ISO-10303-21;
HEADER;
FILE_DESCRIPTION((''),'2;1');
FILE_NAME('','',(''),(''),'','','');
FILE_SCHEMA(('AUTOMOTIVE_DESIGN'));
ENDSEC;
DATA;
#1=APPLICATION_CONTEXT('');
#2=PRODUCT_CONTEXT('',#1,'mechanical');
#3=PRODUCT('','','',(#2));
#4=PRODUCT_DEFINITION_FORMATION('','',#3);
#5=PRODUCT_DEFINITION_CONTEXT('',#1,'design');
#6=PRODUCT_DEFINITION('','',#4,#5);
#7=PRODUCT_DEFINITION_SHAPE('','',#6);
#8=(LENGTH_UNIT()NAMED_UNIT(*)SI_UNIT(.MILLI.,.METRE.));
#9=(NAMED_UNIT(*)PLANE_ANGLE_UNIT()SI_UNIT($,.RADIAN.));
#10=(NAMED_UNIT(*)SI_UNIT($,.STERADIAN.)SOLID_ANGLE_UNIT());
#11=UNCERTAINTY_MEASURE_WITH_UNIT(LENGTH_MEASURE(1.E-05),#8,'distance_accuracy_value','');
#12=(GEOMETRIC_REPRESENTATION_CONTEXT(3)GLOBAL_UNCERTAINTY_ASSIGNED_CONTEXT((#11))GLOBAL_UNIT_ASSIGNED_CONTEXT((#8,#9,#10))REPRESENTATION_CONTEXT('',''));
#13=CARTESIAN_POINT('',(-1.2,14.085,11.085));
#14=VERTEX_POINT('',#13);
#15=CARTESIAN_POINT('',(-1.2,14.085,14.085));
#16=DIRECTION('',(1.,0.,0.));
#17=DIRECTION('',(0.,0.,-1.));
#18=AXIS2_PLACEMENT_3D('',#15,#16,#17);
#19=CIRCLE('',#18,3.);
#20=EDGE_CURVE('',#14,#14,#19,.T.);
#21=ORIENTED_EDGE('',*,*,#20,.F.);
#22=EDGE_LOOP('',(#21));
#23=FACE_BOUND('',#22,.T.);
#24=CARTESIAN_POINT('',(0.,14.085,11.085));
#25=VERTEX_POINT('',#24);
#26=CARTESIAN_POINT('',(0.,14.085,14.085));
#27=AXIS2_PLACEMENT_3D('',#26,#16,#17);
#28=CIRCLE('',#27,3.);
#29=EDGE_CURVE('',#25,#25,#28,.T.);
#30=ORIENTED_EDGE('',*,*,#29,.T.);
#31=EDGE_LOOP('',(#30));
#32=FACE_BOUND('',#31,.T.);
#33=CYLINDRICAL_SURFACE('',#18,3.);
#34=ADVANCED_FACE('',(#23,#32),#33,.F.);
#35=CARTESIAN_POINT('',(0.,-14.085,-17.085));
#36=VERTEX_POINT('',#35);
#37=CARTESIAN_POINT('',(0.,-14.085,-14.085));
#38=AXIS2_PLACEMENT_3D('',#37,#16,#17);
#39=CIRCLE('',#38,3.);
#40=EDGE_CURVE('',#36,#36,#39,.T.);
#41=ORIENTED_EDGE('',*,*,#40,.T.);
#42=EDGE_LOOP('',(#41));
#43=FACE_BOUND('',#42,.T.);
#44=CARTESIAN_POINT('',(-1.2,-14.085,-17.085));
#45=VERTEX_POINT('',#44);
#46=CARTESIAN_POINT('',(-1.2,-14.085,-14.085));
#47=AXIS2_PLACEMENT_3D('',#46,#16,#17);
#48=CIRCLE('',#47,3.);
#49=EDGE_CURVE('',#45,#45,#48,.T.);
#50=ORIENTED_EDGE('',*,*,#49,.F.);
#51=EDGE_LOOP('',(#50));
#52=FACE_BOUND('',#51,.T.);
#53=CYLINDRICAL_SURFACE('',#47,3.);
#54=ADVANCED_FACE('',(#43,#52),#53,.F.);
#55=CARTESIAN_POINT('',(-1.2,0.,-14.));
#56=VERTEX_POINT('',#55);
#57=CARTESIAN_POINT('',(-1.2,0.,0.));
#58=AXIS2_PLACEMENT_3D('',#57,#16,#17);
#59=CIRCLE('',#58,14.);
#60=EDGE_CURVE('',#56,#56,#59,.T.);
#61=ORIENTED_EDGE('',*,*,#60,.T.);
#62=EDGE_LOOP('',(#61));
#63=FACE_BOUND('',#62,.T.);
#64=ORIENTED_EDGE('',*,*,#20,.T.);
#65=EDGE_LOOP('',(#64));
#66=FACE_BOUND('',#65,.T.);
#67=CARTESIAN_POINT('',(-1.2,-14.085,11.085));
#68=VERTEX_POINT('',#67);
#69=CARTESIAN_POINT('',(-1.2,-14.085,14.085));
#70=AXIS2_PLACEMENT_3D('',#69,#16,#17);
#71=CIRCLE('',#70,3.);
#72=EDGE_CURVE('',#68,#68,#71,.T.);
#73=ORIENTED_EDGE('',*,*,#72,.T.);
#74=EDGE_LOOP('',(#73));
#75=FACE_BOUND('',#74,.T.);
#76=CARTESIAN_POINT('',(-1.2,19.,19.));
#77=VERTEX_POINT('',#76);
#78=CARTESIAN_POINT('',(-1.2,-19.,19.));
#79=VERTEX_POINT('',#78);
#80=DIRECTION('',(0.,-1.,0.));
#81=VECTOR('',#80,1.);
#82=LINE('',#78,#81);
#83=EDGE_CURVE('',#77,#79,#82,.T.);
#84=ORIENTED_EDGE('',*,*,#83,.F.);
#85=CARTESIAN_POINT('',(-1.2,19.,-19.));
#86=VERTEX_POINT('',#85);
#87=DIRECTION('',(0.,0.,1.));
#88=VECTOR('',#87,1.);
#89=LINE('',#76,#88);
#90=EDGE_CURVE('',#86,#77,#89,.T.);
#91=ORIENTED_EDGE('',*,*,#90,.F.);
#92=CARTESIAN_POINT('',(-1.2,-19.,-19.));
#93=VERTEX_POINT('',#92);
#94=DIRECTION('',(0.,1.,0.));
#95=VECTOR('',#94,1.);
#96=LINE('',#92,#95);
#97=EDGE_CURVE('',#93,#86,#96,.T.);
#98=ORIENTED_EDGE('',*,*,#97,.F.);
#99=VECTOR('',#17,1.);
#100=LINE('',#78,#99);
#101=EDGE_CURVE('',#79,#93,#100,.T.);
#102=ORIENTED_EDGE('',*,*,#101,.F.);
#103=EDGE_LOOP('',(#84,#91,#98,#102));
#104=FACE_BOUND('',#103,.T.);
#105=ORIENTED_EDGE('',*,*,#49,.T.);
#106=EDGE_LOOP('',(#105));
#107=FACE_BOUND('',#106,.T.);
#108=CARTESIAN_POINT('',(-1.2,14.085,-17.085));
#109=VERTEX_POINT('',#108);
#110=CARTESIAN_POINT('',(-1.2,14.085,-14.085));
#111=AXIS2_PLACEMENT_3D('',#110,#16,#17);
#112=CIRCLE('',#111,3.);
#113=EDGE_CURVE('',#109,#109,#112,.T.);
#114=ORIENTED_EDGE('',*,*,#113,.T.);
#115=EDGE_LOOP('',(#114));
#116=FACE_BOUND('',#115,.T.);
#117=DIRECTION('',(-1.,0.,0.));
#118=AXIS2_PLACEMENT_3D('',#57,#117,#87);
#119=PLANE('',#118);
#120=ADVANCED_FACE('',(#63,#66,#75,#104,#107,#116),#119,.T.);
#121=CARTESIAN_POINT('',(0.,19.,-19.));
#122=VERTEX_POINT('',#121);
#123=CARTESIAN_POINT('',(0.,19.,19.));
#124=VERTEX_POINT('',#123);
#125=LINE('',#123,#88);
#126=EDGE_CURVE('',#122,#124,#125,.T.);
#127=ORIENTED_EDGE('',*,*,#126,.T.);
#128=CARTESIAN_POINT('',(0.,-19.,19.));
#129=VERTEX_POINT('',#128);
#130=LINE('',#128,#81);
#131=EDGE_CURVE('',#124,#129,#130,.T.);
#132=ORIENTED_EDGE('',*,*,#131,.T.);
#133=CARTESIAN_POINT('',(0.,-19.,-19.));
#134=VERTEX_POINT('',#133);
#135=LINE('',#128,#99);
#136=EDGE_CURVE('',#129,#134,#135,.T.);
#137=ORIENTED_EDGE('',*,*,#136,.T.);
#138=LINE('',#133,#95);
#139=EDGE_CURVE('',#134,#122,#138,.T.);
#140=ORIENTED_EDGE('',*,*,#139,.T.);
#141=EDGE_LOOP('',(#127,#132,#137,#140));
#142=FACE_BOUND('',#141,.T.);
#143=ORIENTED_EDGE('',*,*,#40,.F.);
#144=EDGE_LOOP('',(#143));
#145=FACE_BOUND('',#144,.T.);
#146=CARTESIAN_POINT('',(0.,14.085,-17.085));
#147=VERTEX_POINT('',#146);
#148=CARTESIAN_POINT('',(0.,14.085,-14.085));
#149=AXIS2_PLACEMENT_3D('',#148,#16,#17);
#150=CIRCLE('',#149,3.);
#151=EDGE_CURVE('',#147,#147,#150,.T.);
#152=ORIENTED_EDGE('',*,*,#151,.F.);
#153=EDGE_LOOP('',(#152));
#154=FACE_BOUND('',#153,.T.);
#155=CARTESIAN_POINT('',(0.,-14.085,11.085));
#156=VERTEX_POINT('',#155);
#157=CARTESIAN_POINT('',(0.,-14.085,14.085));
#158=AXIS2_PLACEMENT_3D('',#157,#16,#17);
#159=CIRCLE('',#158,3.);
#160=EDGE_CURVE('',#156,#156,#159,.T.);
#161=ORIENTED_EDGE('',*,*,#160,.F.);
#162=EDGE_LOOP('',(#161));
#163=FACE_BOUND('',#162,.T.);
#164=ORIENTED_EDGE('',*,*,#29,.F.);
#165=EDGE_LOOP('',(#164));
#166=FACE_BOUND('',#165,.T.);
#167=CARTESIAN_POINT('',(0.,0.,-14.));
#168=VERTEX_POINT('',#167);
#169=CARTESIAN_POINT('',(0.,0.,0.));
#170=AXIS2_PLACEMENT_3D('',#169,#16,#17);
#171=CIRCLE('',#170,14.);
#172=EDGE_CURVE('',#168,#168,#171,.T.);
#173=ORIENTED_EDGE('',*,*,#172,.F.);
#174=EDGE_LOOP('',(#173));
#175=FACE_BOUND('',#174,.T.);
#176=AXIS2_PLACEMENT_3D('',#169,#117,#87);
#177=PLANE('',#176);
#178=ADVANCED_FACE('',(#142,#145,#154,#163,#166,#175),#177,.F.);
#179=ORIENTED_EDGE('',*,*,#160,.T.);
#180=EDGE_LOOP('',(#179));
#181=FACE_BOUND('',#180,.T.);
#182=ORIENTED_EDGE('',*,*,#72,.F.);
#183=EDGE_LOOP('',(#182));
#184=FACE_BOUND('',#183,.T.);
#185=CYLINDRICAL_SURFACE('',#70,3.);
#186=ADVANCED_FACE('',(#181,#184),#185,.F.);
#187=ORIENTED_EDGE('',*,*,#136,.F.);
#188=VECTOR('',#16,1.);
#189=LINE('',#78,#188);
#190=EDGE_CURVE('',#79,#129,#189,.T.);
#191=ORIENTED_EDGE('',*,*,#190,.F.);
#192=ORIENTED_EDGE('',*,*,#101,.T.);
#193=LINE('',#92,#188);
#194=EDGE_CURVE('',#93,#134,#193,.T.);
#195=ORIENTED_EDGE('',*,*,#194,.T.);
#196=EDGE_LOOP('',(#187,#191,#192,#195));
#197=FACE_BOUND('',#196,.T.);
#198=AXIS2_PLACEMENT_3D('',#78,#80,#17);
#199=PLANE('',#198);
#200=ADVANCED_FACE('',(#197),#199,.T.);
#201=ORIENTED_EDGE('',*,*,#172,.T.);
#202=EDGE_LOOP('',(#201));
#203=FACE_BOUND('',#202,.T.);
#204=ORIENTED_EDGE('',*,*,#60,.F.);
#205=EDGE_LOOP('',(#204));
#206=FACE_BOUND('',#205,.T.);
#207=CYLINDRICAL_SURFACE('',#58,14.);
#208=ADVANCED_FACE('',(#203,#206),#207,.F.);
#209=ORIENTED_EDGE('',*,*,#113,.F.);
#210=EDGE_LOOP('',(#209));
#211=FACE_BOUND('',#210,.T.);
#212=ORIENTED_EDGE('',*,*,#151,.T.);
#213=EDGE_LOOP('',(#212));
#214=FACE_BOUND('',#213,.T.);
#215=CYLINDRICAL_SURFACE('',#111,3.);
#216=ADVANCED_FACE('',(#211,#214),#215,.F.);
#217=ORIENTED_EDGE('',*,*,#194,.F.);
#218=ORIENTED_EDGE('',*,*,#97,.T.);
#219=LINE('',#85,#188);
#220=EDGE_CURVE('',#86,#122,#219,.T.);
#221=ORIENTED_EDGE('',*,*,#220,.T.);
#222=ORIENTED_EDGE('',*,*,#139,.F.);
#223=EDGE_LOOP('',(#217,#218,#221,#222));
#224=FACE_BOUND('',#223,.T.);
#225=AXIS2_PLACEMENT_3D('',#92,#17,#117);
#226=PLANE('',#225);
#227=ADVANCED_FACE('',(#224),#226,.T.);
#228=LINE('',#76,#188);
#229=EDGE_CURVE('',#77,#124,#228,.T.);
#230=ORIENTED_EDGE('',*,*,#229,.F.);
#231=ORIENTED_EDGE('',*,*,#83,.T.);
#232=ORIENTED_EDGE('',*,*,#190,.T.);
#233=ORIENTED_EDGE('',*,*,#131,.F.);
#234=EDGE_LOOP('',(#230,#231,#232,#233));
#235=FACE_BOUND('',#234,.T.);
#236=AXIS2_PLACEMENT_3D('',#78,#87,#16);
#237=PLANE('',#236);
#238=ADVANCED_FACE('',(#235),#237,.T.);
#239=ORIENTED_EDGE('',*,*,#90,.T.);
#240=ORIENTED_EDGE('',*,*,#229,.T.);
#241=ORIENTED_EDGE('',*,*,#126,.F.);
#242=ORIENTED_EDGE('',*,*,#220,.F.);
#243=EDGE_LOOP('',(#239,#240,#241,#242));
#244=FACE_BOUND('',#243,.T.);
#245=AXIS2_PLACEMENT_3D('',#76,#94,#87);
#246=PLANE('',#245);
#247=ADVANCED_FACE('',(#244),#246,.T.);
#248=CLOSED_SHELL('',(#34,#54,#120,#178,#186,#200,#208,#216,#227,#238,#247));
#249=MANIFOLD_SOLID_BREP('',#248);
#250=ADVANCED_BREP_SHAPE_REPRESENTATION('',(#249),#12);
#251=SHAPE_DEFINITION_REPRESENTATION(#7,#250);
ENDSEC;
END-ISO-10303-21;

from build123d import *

# Parameters (mm, degrees)
CROQUIS2_W        = 38
CROQUIS2_H        = 38
CROQUIS2_R        = 14
CROQUIS2_R_2      = 3
BRIDA_BASE1_DEPTH = 1.2


# Sheet-metal steps are written as plain solids
with BuildPart() as part:
    # Croquis2 → Brida base1 (new body)
    with BuildSketch(Plane(origin=(0, 0, 0), x_dir=(0, 0, -1), z_dir=(1, 0, 0))):
        Rectangle(CROQUIS2_W, CROQUIS2_H)
        Circle(CROQUIS2_R, mode=Mode.SUBTRACT)
        with Locations((-14.085, -14.085)):
            Circle(CROQUIS2_R_2, mode=Mode.SUBTRACT)
        with Locations((-14.085, 14.085)):
            Circle(CROQUIS2_R_2, mode=Mode.SUBTRACT)
        with Locations((14.085, 14.085)):
            Circle(CROQUIS2_R_2, mode=Mode.SUBTRACT)
        with Locations((14.085, -14.085)):
            Circle(CROQUIS2_R_2, mode=Mode.SUBTRACT)
    extrude(amount=-BRIDA_BASE1_DEPTH)


solid = part.part
